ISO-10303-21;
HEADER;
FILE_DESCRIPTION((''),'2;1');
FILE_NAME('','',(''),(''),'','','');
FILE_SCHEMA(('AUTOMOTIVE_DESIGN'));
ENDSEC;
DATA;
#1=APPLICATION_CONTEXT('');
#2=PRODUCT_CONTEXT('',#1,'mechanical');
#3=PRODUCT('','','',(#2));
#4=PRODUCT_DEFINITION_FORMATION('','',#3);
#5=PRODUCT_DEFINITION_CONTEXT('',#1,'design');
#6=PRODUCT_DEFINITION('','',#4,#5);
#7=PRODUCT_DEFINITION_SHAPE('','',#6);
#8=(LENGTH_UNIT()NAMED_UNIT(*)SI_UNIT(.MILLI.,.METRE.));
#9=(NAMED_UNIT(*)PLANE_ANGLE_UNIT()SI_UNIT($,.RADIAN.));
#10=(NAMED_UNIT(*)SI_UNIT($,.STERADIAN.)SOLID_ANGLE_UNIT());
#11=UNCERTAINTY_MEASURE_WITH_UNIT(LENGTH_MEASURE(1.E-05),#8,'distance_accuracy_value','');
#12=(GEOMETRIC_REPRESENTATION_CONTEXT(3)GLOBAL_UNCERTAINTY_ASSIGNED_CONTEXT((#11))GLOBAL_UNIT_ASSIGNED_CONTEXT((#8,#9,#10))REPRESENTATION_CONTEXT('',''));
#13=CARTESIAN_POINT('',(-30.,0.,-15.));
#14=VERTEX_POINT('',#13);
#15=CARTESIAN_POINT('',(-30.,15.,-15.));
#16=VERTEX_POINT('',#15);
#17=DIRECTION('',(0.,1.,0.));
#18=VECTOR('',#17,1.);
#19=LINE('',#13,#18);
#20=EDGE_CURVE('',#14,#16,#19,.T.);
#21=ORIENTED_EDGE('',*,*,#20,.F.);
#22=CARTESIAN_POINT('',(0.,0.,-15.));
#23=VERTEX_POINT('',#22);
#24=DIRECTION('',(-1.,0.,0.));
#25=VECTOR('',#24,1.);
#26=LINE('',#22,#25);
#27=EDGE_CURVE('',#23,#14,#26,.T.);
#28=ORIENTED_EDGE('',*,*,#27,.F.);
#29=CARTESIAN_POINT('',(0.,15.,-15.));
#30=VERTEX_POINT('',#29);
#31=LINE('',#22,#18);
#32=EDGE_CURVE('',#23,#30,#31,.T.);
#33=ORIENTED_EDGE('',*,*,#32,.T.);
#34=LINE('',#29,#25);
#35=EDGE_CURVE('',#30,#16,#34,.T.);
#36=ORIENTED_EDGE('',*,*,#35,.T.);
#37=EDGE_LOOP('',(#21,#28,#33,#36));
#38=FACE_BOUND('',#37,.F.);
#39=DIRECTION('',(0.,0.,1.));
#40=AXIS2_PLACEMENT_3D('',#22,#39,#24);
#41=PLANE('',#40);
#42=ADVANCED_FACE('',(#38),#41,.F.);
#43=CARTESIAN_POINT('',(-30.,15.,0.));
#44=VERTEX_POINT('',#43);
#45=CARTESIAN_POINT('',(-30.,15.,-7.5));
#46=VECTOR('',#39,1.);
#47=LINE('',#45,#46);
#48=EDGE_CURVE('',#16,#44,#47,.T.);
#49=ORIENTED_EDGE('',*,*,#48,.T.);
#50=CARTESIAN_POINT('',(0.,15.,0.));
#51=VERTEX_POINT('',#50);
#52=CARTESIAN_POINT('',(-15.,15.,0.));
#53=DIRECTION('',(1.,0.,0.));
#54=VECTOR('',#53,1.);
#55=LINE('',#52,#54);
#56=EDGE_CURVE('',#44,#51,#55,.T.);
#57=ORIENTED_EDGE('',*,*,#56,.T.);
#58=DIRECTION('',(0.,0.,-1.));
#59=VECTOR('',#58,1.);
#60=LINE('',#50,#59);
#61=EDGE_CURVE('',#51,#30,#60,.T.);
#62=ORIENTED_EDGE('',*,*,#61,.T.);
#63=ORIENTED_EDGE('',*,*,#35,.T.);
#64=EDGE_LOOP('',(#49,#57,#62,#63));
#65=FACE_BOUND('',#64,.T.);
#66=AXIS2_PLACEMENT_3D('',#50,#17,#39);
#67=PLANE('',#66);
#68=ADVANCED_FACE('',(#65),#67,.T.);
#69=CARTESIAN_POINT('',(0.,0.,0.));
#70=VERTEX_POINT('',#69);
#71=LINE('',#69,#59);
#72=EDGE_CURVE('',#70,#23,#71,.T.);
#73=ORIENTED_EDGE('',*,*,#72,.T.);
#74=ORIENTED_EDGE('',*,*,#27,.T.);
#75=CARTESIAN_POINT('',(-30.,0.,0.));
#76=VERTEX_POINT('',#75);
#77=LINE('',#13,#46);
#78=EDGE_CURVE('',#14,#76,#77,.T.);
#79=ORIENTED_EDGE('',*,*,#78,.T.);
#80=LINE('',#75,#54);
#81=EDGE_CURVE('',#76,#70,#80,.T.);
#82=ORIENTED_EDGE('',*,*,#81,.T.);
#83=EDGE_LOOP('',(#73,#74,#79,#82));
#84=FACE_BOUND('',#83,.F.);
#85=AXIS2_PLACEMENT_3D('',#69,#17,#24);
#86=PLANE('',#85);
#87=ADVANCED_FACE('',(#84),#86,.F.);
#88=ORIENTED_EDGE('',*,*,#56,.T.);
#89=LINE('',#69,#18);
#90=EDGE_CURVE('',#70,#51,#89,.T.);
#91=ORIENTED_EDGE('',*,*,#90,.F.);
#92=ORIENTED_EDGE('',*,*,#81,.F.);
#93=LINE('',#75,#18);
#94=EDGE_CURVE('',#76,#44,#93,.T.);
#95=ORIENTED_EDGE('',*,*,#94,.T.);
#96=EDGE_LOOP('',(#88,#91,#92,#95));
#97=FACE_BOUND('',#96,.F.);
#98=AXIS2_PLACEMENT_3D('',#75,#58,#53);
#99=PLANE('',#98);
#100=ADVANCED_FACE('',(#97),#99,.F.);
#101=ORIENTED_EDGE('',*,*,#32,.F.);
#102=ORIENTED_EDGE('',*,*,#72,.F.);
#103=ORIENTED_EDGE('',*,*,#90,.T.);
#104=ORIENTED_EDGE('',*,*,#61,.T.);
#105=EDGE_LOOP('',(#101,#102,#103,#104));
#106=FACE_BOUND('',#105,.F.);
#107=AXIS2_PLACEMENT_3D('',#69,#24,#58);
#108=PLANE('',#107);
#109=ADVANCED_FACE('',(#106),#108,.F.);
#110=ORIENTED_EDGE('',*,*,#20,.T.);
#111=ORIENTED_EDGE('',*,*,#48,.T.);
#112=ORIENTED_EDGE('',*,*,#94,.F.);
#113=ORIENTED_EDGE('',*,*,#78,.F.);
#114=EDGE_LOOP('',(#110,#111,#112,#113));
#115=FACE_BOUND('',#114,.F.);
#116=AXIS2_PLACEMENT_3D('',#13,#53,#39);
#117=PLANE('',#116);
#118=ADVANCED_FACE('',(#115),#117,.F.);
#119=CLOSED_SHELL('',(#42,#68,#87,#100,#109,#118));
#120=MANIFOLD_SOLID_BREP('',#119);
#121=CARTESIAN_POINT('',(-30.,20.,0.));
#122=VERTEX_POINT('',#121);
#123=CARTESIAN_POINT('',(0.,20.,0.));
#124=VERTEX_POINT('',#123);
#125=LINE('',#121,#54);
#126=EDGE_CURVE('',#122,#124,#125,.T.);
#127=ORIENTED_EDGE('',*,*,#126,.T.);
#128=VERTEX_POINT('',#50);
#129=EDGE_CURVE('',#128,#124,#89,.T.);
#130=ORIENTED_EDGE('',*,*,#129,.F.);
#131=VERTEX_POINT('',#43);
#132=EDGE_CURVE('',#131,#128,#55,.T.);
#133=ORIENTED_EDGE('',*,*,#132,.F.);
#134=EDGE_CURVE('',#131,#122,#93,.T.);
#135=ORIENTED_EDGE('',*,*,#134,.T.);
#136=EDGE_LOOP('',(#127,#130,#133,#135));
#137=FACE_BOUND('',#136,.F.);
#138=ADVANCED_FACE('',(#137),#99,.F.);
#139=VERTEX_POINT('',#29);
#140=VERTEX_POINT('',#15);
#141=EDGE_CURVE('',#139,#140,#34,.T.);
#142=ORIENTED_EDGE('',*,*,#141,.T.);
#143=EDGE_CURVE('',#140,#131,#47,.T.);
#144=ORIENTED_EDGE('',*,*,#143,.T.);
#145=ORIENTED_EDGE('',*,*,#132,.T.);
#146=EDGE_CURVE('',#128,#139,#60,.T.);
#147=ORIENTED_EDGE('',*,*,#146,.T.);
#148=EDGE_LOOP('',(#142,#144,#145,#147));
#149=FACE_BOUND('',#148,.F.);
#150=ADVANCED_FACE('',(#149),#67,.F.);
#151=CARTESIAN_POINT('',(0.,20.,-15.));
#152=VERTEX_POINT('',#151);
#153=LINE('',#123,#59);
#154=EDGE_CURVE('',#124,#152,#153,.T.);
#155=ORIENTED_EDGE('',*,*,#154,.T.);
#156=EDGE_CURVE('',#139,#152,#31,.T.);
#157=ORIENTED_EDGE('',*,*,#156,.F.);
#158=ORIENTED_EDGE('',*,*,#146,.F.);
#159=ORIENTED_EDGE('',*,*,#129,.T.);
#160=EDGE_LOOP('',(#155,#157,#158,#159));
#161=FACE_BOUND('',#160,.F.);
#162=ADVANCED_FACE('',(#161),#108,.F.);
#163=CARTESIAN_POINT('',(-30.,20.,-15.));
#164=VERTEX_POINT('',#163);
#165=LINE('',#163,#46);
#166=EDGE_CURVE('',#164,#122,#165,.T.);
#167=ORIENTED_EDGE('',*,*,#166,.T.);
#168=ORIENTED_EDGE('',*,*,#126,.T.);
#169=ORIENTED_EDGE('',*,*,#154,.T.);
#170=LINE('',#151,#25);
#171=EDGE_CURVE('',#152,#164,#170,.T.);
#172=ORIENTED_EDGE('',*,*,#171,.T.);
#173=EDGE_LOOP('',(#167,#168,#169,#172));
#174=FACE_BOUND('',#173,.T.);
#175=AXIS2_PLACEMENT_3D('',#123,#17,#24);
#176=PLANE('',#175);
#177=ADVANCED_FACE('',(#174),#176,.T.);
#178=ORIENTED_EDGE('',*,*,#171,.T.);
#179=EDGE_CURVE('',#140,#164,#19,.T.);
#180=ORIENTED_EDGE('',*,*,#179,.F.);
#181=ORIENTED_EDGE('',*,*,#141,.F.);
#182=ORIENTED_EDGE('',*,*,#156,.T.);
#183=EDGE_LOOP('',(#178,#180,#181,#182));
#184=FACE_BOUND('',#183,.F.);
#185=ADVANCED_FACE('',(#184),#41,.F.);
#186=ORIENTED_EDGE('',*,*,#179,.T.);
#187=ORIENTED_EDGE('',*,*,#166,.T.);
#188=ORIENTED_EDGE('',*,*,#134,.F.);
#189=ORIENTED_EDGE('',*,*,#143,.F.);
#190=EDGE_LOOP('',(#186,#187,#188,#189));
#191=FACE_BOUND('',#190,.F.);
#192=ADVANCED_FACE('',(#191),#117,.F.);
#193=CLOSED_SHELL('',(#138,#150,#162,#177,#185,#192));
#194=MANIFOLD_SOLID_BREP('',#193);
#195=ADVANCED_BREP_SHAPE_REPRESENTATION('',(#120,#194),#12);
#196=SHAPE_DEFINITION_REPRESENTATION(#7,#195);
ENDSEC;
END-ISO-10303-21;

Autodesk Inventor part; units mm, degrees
ref_plane "YZ Plane" through (0, 0, 0) normal (1, 0, 0) x (0, 1, 0)
ref_plane "XZ Plane" through (0, 0, 0) normal (0, 1, 0) x (-1, 0, 0)
ref_plane "XY Plane" through (0, 0, 0) normal (0, 0, 1) x (1, 0, 0)
sketch "Sketch1" plane through (0, 0, 0) normal (0, 1, 0) x (-1, 0, 0)
  line L0 (30, 0) -> (0, 0)
  line L1 (0, 0) -> (0, -15)
  line L2 (0, -15) -> (30, -15)
  line L3 (30, -15) -> (30, 0)
  dimension "d0" = 30
  dimension "d1" = 15
extrude "Extrusion1" add sketch "Sketch1" along normal blind 20
ref_plane "Work Plane1" through (0, 15, 0) normal (0, 1, 0) x (1, 0, 0)
split body "Split1" result two bodies by plane through (0, 15, 0) normal (0, 1, 0) first body at (-10, 19.5, -5)
properties part number "enclosure_tests"
